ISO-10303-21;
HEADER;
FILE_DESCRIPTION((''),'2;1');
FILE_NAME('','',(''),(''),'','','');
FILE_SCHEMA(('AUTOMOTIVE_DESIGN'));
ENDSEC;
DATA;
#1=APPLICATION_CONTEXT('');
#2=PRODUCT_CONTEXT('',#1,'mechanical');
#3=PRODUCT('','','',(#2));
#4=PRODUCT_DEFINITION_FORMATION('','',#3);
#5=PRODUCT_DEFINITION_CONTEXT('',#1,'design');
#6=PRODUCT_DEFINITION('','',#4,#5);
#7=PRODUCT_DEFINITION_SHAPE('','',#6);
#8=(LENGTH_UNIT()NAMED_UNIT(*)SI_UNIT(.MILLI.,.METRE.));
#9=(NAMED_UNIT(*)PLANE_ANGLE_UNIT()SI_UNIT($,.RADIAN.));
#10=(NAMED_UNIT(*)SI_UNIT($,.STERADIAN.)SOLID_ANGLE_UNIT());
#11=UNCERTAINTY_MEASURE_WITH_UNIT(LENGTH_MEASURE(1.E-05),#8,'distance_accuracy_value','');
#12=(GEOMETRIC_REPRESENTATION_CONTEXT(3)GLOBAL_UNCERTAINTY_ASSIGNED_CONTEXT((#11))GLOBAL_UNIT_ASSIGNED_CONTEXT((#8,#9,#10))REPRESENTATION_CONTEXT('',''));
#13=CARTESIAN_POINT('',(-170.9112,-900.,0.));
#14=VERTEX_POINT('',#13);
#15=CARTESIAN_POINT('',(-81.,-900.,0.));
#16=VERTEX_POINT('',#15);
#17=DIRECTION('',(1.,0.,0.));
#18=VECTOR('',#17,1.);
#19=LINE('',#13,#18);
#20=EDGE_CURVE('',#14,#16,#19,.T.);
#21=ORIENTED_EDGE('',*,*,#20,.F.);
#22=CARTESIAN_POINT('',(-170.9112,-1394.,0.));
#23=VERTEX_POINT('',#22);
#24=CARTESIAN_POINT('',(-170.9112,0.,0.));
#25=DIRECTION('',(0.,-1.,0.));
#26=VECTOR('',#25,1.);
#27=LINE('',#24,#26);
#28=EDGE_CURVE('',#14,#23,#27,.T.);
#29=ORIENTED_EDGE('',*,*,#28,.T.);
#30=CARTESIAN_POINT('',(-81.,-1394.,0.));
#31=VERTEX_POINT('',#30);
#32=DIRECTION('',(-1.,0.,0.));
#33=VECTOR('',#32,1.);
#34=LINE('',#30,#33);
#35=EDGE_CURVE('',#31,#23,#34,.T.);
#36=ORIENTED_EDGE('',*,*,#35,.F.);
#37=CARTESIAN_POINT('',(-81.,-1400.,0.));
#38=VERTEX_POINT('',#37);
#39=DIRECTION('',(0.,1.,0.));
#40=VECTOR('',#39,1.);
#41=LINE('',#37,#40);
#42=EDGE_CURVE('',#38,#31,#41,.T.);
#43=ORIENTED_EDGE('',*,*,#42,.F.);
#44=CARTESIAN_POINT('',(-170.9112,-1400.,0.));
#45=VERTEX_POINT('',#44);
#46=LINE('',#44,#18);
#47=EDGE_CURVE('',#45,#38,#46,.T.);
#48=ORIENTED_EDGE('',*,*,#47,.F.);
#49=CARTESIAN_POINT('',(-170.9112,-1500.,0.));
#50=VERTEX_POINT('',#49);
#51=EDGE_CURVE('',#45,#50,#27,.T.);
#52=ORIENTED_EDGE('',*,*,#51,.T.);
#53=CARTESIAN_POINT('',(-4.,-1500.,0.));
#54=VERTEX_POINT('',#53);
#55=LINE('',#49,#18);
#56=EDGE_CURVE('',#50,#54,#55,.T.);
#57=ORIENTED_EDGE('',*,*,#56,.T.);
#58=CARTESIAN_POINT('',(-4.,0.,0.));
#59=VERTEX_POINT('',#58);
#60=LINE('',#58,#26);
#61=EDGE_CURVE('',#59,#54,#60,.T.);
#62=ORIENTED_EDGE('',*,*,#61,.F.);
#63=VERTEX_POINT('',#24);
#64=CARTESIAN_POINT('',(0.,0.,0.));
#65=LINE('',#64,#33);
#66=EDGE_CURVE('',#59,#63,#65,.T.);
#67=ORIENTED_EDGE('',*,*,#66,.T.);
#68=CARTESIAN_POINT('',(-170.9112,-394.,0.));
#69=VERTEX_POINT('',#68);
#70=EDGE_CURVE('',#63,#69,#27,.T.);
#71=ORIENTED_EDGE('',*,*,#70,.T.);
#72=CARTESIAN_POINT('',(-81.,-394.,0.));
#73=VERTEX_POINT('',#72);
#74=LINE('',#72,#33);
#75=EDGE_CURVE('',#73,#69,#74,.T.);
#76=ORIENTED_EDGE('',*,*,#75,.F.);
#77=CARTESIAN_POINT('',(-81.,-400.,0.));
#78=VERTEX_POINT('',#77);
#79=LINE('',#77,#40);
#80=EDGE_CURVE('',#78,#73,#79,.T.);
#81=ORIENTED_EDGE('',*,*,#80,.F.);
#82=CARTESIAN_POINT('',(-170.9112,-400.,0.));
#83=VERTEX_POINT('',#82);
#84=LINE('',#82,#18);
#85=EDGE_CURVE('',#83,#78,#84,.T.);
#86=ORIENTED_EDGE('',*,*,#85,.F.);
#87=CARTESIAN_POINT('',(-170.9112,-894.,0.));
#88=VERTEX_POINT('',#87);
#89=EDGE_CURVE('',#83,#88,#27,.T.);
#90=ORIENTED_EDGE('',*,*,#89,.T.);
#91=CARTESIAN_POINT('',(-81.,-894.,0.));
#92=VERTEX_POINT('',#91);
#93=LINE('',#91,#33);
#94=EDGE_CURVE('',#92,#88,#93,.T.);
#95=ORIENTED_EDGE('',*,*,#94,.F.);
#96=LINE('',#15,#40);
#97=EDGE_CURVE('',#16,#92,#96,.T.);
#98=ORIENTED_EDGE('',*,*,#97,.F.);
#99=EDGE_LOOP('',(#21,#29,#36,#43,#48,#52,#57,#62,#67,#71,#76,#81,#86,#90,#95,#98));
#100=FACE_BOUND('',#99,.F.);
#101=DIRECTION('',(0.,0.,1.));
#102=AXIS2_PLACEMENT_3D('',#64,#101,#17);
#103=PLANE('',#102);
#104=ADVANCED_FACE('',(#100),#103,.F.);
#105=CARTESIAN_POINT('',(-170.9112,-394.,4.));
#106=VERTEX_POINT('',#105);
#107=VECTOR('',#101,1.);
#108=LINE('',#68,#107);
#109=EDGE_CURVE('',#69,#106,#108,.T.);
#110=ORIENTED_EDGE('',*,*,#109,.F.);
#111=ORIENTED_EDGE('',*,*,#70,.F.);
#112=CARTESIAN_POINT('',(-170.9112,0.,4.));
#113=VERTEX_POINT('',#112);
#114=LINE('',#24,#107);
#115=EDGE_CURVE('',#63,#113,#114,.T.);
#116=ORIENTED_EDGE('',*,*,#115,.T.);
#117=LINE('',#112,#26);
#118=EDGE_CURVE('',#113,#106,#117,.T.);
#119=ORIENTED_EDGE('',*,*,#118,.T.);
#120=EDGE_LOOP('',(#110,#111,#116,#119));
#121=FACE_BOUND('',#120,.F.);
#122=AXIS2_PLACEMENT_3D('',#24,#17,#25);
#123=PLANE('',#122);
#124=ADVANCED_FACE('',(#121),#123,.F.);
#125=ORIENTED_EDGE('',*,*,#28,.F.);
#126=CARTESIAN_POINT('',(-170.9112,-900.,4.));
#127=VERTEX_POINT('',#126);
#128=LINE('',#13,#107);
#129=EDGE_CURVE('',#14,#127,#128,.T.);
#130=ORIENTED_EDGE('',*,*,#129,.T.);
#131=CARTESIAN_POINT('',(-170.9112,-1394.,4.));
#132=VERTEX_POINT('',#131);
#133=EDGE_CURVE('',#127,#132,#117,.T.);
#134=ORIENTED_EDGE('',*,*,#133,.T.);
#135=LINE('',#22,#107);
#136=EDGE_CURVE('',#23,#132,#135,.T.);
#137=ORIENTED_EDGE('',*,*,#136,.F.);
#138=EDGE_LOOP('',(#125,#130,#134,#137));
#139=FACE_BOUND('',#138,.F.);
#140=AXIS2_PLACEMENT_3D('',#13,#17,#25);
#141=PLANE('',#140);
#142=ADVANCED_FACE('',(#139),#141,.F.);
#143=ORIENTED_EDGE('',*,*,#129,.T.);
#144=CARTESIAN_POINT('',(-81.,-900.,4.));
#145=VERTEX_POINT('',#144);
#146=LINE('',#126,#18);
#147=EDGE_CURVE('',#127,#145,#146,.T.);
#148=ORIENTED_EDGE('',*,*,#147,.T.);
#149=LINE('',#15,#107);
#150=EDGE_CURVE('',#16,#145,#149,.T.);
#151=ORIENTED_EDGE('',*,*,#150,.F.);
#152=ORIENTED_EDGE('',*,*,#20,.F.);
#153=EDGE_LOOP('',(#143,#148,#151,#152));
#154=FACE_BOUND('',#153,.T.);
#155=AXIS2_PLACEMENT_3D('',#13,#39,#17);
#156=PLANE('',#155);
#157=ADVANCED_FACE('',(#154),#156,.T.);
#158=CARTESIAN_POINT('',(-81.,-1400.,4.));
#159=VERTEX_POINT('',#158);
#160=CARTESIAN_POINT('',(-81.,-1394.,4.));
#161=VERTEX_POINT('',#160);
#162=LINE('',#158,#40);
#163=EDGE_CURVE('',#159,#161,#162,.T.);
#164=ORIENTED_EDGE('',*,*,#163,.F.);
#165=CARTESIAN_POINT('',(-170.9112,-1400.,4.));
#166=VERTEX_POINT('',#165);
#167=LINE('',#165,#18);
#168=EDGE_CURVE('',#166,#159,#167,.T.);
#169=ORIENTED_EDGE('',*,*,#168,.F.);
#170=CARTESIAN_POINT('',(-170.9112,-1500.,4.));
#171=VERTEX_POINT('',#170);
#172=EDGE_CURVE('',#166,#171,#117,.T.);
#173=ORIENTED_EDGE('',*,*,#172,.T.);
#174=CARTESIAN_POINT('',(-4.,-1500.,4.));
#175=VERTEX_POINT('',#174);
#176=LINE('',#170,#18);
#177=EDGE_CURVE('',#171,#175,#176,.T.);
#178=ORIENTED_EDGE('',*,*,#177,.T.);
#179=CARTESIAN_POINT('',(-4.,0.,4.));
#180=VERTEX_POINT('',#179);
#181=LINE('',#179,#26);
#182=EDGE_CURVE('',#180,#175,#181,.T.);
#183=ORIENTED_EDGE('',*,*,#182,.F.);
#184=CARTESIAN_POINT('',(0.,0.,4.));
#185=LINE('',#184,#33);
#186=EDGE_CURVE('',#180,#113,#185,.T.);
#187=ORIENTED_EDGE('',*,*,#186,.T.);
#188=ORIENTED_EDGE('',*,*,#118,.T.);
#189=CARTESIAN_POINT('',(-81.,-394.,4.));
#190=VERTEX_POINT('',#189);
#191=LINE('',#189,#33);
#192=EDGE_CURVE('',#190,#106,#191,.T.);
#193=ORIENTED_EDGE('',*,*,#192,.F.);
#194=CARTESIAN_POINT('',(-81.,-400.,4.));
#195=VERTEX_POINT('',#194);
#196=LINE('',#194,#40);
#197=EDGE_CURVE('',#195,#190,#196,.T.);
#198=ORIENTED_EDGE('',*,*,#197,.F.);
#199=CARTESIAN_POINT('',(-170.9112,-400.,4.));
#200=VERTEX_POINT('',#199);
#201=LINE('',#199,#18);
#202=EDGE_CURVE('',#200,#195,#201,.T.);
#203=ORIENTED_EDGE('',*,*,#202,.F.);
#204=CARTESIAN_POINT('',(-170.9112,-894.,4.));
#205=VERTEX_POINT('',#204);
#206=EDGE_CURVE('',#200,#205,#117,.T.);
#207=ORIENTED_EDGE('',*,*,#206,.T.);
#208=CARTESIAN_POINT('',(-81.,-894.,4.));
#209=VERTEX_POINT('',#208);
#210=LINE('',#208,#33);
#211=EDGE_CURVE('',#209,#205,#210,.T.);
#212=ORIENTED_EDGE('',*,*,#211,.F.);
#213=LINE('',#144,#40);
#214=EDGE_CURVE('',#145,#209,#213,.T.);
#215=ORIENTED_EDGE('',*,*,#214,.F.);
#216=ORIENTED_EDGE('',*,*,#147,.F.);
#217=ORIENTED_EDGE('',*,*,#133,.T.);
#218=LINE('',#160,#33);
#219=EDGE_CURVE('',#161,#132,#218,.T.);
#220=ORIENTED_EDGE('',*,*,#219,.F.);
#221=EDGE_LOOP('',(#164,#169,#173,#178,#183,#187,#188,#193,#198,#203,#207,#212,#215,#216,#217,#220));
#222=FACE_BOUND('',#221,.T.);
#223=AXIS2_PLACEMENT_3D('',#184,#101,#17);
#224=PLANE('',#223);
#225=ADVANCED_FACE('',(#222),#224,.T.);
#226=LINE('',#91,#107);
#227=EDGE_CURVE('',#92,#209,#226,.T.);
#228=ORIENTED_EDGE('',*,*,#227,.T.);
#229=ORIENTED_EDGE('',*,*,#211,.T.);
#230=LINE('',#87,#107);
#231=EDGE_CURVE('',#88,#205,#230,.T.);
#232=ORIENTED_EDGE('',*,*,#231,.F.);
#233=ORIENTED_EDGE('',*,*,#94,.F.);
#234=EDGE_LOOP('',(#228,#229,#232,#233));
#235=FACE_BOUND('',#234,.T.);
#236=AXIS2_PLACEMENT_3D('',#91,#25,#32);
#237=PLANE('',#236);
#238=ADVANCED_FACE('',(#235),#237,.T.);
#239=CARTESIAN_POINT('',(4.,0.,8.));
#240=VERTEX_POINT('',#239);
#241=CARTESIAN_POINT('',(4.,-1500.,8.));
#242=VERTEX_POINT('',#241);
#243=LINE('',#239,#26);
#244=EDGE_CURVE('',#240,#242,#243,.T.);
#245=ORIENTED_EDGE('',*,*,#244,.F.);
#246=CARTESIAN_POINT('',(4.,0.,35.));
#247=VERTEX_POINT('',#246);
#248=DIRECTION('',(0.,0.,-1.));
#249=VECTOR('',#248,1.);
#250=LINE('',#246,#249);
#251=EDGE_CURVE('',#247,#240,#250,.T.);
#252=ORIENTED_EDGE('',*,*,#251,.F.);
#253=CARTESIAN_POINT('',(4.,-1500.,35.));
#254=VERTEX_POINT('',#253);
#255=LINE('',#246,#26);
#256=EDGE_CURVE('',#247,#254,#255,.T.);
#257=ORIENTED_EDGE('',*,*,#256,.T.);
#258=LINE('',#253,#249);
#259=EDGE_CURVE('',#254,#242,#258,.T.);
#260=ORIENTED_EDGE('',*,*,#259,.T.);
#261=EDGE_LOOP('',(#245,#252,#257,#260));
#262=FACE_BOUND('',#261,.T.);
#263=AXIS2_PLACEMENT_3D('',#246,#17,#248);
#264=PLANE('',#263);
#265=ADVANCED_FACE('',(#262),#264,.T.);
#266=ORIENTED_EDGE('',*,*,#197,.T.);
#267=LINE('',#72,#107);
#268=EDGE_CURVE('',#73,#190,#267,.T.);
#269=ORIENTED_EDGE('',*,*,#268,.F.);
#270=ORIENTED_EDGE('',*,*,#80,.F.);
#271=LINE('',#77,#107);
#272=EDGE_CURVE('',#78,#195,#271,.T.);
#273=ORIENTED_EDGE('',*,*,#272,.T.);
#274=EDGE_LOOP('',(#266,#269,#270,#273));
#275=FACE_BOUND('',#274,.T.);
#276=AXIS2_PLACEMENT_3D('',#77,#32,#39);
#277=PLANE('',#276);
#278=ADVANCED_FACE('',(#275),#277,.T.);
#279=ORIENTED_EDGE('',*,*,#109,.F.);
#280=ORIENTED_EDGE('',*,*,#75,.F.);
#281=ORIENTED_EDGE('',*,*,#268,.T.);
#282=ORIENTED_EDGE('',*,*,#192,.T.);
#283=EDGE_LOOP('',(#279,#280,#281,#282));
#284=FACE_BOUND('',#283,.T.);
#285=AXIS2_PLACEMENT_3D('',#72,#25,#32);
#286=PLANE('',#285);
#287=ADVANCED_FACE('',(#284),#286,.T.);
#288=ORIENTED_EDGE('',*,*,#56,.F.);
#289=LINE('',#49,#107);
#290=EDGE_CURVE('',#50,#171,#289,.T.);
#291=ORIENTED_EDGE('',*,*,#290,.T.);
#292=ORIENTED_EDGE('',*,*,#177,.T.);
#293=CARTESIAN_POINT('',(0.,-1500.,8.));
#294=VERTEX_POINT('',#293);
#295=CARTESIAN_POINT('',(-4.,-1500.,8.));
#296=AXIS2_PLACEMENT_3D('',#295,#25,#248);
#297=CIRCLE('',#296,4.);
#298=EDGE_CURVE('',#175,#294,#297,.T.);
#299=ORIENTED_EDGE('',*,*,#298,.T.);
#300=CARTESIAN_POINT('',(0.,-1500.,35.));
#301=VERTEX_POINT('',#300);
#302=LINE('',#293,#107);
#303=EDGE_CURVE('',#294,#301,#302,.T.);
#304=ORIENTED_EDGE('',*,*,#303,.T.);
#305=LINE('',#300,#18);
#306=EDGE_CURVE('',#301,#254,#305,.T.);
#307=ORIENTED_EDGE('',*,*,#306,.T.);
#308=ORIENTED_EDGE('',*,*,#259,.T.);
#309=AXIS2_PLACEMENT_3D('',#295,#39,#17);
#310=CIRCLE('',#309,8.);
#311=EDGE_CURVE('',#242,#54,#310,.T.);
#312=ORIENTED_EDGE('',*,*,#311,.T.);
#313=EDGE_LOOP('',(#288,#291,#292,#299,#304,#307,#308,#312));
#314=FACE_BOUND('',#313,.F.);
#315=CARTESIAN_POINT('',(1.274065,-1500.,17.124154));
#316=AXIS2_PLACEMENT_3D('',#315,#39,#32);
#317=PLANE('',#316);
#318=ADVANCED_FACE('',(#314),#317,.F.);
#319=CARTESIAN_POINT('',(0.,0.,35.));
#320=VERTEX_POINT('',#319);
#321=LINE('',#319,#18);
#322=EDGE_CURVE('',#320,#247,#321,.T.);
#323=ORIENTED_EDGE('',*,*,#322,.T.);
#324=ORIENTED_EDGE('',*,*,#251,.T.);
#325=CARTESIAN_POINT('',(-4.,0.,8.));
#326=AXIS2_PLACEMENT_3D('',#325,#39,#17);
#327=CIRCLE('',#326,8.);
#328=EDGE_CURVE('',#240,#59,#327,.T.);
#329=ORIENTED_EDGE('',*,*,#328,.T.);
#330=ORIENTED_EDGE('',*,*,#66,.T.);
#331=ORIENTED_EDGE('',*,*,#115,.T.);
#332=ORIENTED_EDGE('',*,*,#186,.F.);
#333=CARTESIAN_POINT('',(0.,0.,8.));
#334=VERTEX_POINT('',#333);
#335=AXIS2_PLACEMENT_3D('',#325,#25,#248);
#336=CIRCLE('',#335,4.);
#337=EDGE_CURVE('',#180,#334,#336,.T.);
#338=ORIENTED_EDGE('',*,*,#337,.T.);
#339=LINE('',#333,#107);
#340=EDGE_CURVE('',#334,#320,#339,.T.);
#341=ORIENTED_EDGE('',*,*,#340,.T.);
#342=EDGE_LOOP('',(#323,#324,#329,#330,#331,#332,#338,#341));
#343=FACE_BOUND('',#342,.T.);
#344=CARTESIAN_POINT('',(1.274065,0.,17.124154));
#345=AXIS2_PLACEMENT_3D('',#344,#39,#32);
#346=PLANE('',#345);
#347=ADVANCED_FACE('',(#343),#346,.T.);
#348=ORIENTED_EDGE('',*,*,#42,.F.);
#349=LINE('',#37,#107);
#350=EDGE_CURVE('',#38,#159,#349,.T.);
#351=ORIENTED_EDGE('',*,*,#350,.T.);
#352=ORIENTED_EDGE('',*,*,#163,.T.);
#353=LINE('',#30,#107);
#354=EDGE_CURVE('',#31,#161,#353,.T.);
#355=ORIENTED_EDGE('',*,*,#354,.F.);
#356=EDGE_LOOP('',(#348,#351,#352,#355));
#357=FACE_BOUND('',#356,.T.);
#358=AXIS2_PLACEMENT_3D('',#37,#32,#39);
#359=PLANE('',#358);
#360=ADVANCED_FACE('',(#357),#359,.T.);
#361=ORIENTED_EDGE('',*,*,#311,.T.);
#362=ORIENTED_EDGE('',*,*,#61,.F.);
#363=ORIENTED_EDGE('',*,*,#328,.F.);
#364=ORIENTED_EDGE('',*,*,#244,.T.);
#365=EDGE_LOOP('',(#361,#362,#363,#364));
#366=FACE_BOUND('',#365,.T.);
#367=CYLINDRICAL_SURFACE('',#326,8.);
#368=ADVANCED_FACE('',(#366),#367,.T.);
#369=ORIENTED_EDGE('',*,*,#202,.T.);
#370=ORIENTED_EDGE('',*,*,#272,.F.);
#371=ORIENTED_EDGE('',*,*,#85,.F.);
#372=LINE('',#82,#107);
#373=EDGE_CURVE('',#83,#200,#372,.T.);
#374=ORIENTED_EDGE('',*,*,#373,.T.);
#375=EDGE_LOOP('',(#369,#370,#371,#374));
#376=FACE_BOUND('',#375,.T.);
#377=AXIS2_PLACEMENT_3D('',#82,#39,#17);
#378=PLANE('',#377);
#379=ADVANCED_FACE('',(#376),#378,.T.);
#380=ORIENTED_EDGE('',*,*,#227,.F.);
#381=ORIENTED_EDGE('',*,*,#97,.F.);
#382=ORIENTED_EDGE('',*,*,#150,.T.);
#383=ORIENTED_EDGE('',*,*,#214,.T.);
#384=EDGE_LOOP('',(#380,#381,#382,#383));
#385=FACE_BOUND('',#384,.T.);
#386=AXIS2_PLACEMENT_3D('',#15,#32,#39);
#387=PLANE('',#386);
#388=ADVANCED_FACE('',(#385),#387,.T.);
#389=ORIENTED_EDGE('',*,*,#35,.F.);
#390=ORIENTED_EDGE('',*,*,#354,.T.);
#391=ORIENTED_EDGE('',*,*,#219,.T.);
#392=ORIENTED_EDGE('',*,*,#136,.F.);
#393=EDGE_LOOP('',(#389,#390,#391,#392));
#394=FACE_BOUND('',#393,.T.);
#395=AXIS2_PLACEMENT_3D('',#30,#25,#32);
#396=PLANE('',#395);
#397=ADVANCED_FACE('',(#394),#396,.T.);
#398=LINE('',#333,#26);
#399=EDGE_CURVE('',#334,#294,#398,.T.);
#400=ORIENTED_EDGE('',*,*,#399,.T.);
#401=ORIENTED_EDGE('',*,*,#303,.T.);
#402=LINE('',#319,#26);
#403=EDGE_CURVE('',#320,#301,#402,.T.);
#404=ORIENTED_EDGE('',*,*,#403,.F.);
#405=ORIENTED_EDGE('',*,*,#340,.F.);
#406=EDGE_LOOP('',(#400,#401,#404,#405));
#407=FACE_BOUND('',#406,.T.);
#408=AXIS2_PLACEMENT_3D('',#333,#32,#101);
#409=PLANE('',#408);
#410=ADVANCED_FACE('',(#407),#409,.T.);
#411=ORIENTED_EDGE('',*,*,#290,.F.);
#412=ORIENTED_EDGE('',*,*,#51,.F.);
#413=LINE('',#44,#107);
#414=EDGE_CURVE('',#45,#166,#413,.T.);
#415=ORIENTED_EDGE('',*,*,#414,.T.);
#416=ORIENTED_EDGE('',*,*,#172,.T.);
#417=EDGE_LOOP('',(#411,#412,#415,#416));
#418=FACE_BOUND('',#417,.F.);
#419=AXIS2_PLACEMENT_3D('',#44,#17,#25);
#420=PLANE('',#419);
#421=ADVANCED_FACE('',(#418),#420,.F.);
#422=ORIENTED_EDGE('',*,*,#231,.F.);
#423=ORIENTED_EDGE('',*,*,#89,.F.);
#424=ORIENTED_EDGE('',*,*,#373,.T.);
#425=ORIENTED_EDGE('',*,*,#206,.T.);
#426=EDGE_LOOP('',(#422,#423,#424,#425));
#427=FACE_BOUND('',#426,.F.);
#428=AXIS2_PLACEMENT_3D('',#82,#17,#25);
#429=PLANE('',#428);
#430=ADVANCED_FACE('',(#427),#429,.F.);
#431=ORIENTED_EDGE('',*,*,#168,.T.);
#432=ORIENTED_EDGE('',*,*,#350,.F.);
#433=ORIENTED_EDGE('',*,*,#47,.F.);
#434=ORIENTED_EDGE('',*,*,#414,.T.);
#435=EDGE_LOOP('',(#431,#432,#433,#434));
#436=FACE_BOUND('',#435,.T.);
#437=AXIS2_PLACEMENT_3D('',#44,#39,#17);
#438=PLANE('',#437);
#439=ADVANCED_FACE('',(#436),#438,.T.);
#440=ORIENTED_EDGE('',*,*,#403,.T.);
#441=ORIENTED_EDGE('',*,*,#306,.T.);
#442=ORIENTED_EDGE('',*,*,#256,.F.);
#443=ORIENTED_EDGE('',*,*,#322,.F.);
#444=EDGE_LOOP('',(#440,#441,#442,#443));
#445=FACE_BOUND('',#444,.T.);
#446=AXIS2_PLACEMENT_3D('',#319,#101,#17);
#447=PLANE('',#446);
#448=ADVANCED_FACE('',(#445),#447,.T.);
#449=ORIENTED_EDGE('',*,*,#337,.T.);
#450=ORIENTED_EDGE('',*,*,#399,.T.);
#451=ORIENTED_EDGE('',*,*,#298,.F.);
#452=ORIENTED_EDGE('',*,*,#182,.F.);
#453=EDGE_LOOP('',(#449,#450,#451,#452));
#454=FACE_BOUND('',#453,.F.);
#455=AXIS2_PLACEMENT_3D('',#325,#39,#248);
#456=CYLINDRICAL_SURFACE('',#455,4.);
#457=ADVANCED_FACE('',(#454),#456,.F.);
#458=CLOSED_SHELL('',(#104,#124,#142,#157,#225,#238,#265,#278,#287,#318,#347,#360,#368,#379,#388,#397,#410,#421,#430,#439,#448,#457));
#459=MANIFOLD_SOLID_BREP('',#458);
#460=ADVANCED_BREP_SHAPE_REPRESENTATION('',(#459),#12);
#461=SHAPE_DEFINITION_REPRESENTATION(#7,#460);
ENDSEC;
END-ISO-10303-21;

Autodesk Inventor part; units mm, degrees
ref_plane "YZ Plane" through (0, 0, 0) normal (1, 0, 0) x (0, 1, 0)
ref_plane "XZ Plane" through (0, 0, 0) normal (0, 1, 0) x (-1, 0, 0)
ref_plane "XY Plane" through (0, 0, 0) normal (0, 0, 1) x (1, 0, 0)
sketch "Sketch1" plane through (0, 0, 0) normal (0, 0, 1) x (1, 0, 0)
  line L0 (0, 0) -> (-170.9112, 0)
  line L1 (-170.9112, 0) -> (-170.9112, -1500)
  line L2 (-170.9112, -1500) -> (0, -1500)
  line L3 (0, -1500) -> (0, 0)
  line L4 (-170.9112, -1400) -> (-81, -1400)
  line L5 (-81, -1400) -> (-81, -1394)
  line L6 (-81, -1394) -> (-170.9112, -1394)
  line L7 (-170.9112, -1394) -> (-170.9112, -1400)
  line L8 (-170.9112, -900) -> (-81, -900)
  line L9 (-81, -900) -> (-81, -894)
  line L10 (-81, -894) -> (-170.9112, -894)
  line L11 (-170.9112, -894) -> (-170.9112, -900)
  line L12 (-170.9112, -400) -> (-81, -400)
  line L13 (-81, -400) -> (-81, -394)
  line L14 (-81, -394) -> (-170.9112, -394)
  line L15 (-170.9112, -394) -> (-170.9112, -400)
  point P0 (-170.9112, -400)
  dimension "d0" = 1500
  dimension "d1" = 170.9112
  dimension "d2" = 6
  dimension "d4" = 100
  dimension "d7" = 500
  dimension "d23" = 81
extrude "Plate1" add sketch "Sketch1" along normal blind 4 contours L3 L2 L1 L4 L5 L6 L8 L9 L10 L12 L13 L14 L0
sketch "Sketch2" plane through (4, 0, 0) normal (-1, 0, 0) x (0, -1, 0)
  line L0 (1500, 0) -> (0, 0)
  line L1 (0, 0) -> (0, 35)
  line L2 (0, 35) -> (1500, 35)
  line L3 (1500, 35) -> (1500, 0)
edge flange "Flange1" height 35 angle 90 thickness 4 bend radius 4 thickness toward (-1, 0, 0) relief tear relief width 4 relief depth 2 edges at (0, -750, 4) wall of the first edge with corners at (4, -1500, 0) (4, 0, 0) (4, 0, 35) (4, -1500, 35)
bend "Bend1"
corner "Corner1"
equation "\"d1\" = Stringer3_deep"
equation "\"d12\" = Thickness"
equation "\"d13\" = BendReliefWidth"
equation "\"d14\" = BendReliefDepth"
equation "\"d15\" = MinimumRemnant"
equation "\"d16\" = TransitionRadius"
equation "\"d19\" = BendRadius"
equation "\"d20\" = CornerReliefSize"
equation "\"d21\" = GapSize"
equation "\"d22\" = JacobiRadiusSize"
equation "\"BendRadius\" = Thickness"
equation "\"BendReliefWidth\" = Thickness"
equation "\"BendReliefDepth\" = 0.5 * Thickness"
equation "\"CornerReliefSize\" = 4 * Thickness"
equation "\"MinimumRemnant\" = 2 * Thickness"
equation "\"TransitionRadius\" = BendRadius"
equation "\"JacobiRadiusSize\" = BendRadius"
equation "\"GapSize\" = Thickness"
equation "\"Stringer3_deep\" = 170.911249"
equation "\"Thickness\" = 4"
properties part number "stringer 1.3" material "Steel"
